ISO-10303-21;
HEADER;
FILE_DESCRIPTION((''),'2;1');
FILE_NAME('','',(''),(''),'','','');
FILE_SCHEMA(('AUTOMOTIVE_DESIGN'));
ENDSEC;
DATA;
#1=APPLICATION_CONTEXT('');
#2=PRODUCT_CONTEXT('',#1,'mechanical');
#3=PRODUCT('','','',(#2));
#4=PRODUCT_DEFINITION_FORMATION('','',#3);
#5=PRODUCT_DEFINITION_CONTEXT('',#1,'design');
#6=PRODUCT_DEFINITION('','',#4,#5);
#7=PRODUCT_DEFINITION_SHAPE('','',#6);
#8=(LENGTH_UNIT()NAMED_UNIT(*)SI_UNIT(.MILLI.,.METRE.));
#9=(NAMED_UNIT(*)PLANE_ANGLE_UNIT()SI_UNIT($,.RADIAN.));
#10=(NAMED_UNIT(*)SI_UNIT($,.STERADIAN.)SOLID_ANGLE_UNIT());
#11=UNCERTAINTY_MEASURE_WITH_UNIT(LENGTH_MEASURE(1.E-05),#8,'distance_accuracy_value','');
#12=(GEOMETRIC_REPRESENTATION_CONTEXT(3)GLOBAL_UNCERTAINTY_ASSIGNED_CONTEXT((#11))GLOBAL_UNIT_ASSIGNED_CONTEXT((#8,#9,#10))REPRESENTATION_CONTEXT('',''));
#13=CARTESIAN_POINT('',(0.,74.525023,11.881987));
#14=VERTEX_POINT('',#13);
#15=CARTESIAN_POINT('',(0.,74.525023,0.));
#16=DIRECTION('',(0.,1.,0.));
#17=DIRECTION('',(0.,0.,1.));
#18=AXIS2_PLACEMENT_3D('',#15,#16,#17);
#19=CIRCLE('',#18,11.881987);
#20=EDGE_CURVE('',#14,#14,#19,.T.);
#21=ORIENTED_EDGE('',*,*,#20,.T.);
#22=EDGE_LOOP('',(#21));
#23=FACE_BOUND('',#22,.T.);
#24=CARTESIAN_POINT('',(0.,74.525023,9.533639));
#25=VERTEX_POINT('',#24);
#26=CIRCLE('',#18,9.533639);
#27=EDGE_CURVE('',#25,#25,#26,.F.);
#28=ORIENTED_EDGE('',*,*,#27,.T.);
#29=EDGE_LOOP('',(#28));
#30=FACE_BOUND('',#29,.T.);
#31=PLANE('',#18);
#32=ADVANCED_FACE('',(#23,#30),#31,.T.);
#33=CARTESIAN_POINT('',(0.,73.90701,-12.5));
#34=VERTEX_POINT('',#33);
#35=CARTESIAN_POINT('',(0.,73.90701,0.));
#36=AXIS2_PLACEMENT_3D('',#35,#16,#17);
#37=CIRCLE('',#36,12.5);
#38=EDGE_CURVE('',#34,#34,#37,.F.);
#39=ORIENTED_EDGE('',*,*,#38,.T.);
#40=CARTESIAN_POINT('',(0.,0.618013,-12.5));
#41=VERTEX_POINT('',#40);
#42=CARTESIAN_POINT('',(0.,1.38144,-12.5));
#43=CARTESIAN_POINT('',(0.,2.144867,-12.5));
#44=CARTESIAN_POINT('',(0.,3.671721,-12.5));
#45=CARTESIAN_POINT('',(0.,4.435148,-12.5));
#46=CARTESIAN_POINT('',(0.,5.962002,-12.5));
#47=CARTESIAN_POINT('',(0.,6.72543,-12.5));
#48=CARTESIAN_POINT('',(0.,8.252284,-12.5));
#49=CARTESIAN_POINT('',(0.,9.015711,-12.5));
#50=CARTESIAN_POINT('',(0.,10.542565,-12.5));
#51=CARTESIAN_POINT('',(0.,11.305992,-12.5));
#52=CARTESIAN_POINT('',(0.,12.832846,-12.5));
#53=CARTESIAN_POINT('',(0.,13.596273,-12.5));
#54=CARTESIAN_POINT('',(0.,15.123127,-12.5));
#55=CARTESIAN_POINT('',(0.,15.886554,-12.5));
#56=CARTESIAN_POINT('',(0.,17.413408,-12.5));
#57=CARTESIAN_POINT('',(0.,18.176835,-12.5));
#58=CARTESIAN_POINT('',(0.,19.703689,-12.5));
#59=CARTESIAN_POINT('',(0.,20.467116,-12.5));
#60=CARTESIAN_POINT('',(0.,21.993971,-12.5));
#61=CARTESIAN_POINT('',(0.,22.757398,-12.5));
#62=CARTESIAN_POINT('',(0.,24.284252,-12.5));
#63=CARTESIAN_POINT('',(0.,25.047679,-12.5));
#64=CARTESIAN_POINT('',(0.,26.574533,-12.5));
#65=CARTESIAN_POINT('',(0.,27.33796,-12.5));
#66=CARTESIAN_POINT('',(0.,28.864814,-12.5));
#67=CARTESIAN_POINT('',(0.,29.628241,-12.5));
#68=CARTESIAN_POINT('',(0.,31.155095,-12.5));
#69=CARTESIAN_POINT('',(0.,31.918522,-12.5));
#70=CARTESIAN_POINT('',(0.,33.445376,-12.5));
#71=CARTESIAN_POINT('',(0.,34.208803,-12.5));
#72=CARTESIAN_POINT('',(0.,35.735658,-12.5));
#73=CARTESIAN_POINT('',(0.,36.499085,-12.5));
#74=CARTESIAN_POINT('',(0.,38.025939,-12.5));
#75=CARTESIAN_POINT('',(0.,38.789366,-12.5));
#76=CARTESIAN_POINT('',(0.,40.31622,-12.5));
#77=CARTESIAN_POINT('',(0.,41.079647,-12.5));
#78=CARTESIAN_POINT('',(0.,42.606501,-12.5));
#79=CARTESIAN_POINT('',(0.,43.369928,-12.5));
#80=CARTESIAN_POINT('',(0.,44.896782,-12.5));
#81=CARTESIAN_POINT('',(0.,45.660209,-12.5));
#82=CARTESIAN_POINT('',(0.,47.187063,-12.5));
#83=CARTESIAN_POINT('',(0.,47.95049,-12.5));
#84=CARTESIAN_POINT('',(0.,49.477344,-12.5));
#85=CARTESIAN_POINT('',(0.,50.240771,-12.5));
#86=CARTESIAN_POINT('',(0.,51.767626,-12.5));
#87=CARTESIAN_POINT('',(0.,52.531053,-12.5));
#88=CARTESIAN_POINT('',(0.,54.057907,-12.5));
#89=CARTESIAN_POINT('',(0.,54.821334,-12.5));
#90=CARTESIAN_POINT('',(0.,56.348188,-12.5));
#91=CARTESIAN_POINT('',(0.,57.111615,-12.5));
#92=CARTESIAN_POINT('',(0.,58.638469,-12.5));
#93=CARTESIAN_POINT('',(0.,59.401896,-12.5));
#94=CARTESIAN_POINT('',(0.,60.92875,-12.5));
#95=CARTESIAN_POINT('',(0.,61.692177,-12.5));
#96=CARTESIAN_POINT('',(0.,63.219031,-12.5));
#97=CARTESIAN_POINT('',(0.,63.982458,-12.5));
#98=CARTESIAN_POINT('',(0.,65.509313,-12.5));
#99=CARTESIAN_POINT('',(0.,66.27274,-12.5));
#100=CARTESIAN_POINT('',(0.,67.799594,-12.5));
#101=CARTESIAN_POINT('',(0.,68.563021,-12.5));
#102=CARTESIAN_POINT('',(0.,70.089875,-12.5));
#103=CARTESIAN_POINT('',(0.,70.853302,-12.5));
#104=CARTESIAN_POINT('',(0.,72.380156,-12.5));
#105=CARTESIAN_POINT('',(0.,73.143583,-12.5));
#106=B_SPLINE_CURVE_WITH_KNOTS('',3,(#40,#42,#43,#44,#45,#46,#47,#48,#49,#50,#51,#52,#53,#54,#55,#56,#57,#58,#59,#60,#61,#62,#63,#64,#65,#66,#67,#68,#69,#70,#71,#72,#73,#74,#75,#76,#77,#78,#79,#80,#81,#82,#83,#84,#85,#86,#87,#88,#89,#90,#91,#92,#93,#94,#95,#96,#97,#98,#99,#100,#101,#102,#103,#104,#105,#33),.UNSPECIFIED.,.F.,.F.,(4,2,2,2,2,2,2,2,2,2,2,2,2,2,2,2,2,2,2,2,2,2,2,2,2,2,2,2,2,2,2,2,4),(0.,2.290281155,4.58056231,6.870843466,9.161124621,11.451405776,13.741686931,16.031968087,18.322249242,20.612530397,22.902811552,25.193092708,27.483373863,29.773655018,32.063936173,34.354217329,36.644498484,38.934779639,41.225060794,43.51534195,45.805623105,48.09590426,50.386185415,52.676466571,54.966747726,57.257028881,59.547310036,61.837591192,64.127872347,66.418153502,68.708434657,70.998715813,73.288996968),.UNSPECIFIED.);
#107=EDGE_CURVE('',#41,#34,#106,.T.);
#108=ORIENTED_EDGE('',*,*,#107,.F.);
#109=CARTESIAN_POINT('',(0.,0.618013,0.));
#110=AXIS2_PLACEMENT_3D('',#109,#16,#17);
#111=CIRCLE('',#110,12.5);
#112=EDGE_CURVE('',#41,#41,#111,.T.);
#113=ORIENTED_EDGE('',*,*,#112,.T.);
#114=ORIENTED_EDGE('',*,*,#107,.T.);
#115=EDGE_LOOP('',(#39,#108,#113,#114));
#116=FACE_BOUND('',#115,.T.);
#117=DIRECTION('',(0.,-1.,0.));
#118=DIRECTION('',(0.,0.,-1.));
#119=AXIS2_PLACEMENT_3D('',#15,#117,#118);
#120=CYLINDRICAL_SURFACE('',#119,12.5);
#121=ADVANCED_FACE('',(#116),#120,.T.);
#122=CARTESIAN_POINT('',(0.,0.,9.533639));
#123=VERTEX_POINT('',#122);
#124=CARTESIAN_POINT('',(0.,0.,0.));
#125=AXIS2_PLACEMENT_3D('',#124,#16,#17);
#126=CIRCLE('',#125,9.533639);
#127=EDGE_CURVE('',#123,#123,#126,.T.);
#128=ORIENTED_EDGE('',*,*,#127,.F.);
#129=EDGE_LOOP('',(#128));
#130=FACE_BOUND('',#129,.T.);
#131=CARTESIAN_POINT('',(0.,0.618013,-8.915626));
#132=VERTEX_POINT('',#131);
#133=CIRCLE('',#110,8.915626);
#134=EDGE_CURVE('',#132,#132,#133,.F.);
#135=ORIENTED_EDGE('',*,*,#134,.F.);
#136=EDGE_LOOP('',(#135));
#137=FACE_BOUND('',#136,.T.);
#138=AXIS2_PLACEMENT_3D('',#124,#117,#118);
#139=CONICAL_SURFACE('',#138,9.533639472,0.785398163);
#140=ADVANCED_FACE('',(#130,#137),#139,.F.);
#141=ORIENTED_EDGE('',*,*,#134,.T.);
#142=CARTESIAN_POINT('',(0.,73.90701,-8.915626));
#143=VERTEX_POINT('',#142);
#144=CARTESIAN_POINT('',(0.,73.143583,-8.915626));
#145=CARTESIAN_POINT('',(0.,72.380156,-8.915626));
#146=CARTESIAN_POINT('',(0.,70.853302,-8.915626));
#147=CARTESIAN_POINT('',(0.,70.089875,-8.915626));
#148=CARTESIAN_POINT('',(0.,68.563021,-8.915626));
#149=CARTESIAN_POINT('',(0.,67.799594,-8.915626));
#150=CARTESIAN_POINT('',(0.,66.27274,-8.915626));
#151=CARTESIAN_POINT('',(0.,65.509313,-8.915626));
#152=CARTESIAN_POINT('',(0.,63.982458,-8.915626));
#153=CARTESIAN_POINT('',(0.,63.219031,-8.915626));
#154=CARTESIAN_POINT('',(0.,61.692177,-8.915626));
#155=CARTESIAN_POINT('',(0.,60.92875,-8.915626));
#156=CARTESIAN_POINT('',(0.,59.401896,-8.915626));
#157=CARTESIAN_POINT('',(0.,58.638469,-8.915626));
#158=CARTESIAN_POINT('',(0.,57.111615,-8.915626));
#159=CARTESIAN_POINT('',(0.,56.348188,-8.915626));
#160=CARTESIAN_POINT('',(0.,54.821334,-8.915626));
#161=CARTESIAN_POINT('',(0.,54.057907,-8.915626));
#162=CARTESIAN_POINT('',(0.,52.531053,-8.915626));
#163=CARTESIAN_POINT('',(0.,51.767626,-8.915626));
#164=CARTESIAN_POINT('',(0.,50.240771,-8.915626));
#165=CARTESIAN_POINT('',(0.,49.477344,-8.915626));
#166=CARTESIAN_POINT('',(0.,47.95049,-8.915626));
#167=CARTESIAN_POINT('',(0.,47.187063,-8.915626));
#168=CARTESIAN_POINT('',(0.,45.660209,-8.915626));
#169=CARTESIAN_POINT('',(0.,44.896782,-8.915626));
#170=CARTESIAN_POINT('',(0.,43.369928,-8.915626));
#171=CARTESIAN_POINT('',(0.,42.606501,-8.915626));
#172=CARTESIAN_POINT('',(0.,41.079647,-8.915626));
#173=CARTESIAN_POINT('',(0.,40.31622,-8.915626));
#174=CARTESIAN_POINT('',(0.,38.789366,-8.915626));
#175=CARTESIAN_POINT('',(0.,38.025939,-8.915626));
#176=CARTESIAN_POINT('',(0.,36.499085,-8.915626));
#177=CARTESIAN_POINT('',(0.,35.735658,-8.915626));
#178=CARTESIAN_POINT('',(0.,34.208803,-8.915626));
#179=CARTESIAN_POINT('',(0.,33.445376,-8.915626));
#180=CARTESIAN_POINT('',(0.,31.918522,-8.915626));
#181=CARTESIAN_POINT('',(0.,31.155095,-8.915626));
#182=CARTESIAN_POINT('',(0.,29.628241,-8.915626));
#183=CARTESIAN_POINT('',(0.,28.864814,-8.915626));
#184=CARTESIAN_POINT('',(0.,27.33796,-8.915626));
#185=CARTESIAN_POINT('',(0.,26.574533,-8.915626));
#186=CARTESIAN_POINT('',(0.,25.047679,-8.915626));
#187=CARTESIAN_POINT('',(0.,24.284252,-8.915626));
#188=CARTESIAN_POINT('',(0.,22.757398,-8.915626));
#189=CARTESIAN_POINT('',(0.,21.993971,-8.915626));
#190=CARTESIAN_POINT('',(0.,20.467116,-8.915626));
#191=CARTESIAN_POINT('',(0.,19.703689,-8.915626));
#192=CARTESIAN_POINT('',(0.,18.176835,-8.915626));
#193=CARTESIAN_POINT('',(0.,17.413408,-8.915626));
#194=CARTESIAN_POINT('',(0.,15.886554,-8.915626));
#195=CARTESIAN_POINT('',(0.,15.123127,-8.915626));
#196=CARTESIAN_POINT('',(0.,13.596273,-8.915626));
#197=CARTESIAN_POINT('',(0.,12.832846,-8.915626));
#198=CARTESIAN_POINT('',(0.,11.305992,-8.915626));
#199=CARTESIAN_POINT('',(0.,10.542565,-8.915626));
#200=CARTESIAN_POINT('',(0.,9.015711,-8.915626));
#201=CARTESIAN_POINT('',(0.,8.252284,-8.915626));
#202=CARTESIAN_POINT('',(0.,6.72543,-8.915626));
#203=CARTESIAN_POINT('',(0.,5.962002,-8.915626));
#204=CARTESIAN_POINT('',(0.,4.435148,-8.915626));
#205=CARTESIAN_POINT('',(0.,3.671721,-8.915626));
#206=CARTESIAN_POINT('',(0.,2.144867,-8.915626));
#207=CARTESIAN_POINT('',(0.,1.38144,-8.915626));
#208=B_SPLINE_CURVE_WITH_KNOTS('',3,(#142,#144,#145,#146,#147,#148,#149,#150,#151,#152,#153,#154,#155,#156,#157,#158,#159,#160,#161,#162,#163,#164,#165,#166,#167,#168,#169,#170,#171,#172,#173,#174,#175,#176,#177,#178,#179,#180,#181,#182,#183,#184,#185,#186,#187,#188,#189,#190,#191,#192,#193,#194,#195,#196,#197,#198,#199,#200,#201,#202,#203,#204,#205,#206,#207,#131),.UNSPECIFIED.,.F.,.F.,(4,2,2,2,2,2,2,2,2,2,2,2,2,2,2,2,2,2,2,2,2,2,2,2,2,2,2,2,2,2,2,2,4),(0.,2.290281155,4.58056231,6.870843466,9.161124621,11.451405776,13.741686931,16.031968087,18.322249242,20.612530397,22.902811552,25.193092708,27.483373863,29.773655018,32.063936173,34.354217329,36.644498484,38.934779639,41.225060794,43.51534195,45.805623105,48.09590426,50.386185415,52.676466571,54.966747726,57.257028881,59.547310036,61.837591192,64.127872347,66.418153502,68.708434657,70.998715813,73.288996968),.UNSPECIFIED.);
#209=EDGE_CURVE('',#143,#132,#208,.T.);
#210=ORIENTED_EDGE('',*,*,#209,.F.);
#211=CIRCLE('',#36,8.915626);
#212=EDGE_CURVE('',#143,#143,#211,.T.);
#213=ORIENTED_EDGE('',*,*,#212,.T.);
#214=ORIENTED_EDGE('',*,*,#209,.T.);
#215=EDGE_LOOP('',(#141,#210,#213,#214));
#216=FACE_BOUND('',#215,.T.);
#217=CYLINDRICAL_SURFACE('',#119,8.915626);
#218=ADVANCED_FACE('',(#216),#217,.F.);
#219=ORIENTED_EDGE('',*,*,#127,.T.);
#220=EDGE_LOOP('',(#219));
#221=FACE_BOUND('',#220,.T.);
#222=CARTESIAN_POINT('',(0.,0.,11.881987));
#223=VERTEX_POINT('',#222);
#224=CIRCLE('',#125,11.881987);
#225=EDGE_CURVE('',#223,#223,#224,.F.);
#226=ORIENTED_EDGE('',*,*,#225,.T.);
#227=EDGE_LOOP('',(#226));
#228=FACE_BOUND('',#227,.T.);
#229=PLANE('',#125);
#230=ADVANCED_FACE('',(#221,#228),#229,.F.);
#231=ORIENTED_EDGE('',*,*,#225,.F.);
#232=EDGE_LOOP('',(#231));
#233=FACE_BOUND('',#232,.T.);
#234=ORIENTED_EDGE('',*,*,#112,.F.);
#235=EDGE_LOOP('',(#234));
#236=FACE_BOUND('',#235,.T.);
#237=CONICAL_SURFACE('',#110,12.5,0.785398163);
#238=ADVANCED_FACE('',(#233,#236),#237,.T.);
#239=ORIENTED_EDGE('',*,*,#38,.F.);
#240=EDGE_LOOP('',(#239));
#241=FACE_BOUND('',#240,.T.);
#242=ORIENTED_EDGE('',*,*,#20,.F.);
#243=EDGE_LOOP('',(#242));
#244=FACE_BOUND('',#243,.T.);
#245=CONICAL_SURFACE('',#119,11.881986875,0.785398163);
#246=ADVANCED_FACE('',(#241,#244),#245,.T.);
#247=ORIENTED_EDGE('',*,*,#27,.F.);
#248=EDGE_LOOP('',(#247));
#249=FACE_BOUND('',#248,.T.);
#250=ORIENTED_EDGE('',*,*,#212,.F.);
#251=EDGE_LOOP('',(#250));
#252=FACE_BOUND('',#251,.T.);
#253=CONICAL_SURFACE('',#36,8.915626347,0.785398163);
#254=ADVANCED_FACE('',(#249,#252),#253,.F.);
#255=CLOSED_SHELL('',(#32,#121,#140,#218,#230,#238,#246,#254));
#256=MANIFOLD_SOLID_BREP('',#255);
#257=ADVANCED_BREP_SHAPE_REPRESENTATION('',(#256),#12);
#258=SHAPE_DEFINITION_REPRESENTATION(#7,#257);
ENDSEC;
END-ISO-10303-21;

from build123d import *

# Parameters (mm, degrees)
SKETCH1_R           = 12.5
BOSS_EXTRUDE1_DEPTH = 74.525023218
SKETCH2_R           = 8.915626347
CUT_EXTRUDE1_DEPTH  = 77.592944098
CHAMFER1_SIZE       = 0.618013125


with BuildPart() as part:
    # Sketch1 → Boss-Extrude1 (new body)
    with BuildSketch(Plane(origin=(0, 0, 0), x_dir=(1, 0, 0), z_dir=(0, 1, 0))):
        Circle(SKETCH1_R)
    extrude(amount=BOSS_EXTRUDE1_DEPTH)

    # Sketch2 → Cut-Extrude1 (cut, through all)
    with BuildSketch(Plane(origin=(0, 0, 0), x_dir=(1, 0, 0), z_dir=(0, 1, 0))):
        Circle(SKETCH2_R)
    extrude(amount=CUT_EXTRUDE1_DEPTH, mode=Mode.SUBTRACT)

    # Chamfer1
    chamfer1_edges = [part.edges().sort_by_distance(p)[0] for p in [
        (-8.915626347, 74.525023218, 0),
        (-8.915626347, 0, 0),
        (-12.5, 0, 0),
        (-12.5, 74.525023218, 0),
    ]]
    chamfer(chamfer1_edges, length=CHAMFER1_SIZE)


solid = part.part
